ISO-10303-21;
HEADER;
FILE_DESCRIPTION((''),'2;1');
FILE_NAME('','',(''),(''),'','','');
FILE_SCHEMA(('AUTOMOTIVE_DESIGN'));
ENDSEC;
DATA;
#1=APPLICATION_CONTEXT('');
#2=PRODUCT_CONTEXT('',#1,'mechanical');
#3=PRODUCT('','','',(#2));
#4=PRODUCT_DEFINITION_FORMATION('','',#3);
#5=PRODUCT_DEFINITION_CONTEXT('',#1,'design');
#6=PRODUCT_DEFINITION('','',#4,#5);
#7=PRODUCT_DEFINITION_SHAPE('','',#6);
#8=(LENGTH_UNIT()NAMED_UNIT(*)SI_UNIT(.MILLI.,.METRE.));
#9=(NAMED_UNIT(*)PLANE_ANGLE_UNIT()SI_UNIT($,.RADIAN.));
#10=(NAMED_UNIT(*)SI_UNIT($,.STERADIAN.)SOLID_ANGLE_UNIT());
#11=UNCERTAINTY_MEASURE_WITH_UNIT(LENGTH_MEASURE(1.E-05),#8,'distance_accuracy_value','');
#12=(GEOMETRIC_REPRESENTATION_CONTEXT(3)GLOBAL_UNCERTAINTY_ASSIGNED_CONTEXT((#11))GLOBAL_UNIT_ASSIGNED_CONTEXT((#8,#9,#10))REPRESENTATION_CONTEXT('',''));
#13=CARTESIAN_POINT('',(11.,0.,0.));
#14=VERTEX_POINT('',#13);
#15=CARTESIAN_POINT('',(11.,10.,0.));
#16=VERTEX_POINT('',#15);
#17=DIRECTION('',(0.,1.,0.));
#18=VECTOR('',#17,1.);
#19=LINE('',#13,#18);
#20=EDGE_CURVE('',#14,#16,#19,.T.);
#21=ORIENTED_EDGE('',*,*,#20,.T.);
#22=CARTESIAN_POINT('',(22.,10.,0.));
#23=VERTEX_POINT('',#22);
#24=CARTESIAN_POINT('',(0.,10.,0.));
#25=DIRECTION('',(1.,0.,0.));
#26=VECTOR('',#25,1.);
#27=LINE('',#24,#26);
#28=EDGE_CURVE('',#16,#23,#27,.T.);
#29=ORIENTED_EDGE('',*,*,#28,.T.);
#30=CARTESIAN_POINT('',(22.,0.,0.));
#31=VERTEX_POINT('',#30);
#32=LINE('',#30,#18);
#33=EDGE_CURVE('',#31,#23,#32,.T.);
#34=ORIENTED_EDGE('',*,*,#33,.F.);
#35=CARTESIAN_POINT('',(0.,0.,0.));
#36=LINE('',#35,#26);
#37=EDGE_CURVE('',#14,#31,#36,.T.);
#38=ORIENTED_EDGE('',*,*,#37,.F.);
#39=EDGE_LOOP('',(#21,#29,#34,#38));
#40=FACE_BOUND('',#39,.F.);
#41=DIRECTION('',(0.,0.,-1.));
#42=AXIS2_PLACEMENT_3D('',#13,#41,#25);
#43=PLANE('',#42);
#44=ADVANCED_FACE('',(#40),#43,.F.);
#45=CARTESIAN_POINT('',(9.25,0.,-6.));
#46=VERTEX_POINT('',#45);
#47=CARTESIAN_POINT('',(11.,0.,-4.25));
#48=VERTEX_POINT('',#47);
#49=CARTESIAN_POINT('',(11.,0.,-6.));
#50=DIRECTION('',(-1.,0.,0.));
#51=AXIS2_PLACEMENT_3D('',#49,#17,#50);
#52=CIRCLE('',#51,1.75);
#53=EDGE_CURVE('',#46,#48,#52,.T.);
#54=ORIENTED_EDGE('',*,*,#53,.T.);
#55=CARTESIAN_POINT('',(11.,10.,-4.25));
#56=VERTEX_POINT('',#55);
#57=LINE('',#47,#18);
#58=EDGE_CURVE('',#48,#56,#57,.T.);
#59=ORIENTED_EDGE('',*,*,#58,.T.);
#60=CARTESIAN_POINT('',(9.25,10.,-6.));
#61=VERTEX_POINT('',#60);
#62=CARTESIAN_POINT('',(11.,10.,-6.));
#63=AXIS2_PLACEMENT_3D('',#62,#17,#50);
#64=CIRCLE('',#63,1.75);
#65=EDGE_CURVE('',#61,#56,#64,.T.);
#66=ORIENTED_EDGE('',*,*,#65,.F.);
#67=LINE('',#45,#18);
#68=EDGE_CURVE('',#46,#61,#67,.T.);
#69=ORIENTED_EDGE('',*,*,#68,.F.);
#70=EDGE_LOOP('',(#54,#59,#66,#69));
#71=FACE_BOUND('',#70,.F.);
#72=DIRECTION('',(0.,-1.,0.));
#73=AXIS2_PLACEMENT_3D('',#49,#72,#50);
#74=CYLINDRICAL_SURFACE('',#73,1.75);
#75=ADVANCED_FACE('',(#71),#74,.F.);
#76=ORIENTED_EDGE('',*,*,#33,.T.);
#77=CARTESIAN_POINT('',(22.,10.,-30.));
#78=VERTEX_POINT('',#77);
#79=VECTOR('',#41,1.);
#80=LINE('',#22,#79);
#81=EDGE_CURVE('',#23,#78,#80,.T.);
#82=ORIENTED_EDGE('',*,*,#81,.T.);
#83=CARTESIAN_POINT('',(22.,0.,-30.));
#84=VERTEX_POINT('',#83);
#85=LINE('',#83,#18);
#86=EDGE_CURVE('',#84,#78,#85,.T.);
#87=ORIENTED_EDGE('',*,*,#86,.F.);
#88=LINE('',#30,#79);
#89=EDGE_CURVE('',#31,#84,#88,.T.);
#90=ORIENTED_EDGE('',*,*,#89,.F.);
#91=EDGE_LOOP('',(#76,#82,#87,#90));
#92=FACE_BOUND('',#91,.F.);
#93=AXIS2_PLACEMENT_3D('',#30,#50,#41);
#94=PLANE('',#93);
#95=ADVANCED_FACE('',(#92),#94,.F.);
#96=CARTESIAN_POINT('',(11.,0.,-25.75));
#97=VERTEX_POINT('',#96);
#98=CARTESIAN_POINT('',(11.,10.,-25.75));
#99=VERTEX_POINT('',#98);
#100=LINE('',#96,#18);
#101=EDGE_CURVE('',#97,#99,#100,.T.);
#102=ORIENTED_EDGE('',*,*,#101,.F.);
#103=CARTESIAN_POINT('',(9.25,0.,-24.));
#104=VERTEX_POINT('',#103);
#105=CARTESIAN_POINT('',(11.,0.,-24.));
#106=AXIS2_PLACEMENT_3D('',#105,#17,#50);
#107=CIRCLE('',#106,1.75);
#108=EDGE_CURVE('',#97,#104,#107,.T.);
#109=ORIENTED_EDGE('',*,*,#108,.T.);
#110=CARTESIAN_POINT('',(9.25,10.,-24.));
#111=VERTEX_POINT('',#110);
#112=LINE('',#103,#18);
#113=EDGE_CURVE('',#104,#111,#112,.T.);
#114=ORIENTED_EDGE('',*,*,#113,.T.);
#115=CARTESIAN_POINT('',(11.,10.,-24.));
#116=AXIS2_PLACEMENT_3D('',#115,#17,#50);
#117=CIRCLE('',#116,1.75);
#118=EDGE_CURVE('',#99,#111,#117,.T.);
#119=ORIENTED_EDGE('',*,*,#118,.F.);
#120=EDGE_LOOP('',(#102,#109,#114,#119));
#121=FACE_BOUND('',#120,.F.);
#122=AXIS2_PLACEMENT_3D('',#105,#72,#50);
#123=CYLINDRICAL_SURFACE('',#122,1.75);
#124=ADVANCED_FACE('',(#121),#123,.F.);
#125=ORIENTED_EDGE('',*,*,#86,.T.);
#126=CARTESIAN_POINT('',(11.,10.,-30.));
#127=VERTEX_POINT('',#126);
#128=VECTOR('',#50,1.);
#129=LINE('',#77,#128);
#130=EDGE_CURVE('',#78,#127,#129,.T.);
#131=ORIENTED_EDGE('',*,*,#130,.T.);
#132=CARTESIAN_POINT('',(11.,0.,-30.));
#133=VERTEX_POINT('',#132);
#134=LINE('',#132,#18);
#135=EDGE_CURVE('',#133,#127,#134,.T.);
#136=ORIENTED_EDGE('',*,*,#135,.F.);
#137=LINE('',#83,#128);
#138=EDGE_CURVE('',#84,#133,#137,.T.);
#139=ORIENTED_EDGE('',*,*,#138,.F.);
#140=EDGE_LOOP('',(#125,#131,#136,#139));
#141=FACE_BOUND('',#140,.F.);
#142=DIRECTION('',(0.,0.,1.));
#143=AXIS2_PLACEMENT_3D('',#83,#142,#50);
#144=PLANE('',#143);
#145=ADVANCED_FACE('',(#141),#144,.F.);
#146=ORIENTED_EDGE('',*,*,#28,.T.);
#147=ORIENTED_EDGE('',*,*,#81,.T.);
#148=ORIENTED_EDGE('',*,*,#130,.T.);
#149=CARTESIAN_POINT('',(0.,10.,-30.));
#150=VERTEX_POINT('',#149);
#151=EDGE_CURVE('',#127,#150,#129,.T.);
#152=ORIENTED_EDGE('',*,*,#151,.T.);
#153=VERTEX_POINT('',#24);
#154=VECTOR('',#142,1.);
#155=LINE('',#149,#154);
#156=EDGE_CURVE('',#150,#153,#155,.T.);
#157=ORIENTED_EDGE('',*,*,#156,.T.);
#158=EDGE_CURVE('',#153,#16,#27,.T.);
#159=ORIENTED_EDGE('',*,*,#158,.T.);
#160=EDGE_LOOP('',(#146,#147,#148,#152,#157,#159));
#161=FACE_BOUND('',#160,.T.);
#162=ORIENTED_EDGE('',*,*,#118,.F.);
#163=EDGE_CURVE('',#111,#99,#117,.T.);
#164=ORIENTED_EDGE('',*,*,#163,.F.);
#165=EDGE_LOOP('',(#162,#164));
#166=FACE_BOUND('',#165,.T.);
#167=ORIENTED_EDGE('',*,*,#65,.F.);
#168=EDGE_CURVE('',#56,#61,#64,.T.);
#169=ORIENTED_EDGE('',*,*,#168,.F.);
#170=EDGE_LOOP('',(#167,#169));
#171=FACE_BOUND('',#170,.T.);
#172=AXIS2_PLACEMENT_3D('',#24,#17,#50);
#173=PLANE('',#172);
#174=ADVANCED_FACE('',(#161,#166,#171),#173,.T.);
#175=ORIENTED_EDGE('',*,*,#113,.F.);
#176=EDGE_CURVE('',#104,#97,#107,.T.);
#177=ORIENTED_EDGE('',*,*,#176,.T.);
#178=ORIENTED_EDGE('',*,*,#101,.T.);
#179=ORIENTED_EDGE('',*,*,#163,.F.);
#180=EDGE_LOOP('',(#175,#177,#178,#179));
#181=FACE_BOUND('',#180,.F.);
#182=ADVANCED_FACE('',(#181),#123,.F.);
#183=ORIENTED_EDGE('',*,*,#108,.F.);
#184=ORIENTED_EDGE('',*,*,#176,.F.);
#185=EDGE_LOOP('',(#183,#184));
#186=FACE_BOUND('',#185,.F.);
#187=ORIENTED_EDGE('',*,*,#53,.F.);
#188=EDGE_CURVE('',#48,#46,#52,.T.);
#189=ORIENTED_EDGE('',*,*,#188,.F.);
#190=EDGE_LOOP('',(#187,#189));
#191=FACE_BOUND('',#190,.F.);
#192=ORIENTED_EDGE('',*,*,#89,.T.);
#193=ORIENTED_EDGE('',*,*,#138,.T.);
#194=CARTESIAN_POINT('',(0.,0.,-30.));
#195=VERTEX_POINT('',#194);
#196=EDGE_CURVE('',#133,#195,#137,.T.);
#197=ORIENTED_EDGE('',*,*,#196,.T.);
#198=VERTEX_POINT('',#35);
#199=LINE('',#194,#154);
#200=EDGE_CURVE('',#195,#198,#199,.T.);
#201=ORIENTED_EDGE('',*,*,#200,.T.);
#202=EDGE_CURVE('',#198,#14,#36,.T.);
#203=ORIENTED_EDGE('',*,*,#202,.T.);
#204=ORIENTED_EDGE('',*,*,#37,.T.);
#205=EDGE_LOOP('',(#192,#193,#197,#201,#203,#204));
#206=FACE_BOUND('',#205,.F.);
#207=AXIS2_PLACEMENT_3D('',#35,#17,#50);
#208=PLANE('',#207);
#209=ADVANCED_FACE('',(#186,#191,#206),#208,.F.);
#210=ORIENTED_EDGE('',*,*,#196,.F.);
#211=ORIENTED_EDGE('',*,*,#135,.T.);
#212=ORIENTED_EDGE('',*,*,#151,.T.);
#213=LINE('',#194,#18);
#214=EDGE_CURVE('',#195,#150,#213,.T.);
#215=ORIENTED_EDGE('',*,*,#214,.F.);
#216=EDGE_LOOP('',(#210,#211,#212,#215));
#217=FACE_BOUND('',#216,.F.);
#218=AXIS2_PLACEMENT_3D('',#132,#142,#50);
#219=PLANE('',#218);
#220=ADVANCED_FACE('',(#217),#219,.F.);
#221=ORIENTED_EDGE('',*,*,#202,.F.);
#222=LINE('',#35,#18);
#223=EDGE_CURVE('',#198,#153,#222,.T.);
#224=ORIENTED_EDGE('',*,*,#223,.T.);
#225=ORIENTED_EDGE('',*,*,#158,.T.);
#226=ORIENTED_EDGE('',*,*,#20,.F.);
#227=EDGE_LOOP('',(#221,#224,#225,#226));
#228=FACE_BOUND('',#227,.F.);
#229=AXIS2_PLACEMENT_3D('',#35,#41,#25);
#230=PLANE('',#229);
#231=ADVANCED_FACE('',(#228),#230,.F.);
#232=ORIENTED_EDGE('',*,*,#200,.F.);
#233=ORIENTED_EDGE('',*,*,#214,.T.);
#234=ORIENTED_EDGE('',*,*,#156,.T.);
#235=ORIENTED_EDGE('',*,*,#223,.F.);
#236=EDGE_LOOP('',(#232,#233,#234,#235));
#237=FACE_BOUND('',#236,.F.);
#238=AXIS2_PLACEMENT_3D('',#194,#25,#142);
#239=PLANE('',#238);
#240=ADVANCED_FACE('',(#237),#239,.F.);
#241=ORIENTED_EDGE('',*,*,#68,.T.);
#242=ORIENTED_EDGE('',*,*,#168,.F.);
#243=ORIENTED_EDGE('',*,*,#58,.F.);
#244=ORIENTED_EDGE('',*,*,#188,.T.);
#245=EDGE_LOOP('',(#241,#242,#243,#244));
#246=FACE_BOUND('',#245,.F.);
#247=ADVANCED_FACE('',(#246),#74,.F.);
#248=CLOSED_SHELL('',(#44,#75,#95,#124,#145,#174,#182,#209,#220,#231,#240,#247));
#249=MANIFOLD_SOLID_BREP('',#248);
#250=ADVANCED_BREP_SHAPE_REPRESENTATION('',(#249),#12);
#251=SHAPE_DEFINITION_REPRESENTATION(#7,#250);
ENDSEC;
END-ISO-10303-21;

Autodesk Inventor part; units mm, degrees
ref_plane "YZ Plane" through (0, 0, 0) normal (1, 0, 0) x (0, 1, 0)
ref_plane "XZ Plane" through (0, 0, 0) normal (0, 1, 0) x (-1, 0, 0)
ref_plane "XY Plane" through (0, 0, 0) normal (0, 0, 1) x (1, 0, 0)
sketch "Boceto1" plane through (0, 0, 0) normal (0, 1, 0) x (-1, 0, 0)
  line L0 (0, 0) -> (-22, 0)
  line L1 (-22, 0) -> (-22, -30)
  line L2 (-22, -30) -> (0, -30)
  line L3 (0, -30) -> (0, 0)
  line L4 (-11, 0) -> (-11, -6)
  line L5 (-11, -30) -> (-11, -24)
  circle A0 centre (-11, -6) radius 1.75
  circle A1 centre (-11, -24) radius 1.75
  dimension "d0" = 22
  dimension "d1" = 30
  dimension "d2" = 6
  dimension "d3" = 6
  dimension "d4" = 3.5
  dimension "d5" = 3.5
extrude "Extrusión1" add sketch "Boceto1" along normal blind 10
properties part number "Detector fil - base"
